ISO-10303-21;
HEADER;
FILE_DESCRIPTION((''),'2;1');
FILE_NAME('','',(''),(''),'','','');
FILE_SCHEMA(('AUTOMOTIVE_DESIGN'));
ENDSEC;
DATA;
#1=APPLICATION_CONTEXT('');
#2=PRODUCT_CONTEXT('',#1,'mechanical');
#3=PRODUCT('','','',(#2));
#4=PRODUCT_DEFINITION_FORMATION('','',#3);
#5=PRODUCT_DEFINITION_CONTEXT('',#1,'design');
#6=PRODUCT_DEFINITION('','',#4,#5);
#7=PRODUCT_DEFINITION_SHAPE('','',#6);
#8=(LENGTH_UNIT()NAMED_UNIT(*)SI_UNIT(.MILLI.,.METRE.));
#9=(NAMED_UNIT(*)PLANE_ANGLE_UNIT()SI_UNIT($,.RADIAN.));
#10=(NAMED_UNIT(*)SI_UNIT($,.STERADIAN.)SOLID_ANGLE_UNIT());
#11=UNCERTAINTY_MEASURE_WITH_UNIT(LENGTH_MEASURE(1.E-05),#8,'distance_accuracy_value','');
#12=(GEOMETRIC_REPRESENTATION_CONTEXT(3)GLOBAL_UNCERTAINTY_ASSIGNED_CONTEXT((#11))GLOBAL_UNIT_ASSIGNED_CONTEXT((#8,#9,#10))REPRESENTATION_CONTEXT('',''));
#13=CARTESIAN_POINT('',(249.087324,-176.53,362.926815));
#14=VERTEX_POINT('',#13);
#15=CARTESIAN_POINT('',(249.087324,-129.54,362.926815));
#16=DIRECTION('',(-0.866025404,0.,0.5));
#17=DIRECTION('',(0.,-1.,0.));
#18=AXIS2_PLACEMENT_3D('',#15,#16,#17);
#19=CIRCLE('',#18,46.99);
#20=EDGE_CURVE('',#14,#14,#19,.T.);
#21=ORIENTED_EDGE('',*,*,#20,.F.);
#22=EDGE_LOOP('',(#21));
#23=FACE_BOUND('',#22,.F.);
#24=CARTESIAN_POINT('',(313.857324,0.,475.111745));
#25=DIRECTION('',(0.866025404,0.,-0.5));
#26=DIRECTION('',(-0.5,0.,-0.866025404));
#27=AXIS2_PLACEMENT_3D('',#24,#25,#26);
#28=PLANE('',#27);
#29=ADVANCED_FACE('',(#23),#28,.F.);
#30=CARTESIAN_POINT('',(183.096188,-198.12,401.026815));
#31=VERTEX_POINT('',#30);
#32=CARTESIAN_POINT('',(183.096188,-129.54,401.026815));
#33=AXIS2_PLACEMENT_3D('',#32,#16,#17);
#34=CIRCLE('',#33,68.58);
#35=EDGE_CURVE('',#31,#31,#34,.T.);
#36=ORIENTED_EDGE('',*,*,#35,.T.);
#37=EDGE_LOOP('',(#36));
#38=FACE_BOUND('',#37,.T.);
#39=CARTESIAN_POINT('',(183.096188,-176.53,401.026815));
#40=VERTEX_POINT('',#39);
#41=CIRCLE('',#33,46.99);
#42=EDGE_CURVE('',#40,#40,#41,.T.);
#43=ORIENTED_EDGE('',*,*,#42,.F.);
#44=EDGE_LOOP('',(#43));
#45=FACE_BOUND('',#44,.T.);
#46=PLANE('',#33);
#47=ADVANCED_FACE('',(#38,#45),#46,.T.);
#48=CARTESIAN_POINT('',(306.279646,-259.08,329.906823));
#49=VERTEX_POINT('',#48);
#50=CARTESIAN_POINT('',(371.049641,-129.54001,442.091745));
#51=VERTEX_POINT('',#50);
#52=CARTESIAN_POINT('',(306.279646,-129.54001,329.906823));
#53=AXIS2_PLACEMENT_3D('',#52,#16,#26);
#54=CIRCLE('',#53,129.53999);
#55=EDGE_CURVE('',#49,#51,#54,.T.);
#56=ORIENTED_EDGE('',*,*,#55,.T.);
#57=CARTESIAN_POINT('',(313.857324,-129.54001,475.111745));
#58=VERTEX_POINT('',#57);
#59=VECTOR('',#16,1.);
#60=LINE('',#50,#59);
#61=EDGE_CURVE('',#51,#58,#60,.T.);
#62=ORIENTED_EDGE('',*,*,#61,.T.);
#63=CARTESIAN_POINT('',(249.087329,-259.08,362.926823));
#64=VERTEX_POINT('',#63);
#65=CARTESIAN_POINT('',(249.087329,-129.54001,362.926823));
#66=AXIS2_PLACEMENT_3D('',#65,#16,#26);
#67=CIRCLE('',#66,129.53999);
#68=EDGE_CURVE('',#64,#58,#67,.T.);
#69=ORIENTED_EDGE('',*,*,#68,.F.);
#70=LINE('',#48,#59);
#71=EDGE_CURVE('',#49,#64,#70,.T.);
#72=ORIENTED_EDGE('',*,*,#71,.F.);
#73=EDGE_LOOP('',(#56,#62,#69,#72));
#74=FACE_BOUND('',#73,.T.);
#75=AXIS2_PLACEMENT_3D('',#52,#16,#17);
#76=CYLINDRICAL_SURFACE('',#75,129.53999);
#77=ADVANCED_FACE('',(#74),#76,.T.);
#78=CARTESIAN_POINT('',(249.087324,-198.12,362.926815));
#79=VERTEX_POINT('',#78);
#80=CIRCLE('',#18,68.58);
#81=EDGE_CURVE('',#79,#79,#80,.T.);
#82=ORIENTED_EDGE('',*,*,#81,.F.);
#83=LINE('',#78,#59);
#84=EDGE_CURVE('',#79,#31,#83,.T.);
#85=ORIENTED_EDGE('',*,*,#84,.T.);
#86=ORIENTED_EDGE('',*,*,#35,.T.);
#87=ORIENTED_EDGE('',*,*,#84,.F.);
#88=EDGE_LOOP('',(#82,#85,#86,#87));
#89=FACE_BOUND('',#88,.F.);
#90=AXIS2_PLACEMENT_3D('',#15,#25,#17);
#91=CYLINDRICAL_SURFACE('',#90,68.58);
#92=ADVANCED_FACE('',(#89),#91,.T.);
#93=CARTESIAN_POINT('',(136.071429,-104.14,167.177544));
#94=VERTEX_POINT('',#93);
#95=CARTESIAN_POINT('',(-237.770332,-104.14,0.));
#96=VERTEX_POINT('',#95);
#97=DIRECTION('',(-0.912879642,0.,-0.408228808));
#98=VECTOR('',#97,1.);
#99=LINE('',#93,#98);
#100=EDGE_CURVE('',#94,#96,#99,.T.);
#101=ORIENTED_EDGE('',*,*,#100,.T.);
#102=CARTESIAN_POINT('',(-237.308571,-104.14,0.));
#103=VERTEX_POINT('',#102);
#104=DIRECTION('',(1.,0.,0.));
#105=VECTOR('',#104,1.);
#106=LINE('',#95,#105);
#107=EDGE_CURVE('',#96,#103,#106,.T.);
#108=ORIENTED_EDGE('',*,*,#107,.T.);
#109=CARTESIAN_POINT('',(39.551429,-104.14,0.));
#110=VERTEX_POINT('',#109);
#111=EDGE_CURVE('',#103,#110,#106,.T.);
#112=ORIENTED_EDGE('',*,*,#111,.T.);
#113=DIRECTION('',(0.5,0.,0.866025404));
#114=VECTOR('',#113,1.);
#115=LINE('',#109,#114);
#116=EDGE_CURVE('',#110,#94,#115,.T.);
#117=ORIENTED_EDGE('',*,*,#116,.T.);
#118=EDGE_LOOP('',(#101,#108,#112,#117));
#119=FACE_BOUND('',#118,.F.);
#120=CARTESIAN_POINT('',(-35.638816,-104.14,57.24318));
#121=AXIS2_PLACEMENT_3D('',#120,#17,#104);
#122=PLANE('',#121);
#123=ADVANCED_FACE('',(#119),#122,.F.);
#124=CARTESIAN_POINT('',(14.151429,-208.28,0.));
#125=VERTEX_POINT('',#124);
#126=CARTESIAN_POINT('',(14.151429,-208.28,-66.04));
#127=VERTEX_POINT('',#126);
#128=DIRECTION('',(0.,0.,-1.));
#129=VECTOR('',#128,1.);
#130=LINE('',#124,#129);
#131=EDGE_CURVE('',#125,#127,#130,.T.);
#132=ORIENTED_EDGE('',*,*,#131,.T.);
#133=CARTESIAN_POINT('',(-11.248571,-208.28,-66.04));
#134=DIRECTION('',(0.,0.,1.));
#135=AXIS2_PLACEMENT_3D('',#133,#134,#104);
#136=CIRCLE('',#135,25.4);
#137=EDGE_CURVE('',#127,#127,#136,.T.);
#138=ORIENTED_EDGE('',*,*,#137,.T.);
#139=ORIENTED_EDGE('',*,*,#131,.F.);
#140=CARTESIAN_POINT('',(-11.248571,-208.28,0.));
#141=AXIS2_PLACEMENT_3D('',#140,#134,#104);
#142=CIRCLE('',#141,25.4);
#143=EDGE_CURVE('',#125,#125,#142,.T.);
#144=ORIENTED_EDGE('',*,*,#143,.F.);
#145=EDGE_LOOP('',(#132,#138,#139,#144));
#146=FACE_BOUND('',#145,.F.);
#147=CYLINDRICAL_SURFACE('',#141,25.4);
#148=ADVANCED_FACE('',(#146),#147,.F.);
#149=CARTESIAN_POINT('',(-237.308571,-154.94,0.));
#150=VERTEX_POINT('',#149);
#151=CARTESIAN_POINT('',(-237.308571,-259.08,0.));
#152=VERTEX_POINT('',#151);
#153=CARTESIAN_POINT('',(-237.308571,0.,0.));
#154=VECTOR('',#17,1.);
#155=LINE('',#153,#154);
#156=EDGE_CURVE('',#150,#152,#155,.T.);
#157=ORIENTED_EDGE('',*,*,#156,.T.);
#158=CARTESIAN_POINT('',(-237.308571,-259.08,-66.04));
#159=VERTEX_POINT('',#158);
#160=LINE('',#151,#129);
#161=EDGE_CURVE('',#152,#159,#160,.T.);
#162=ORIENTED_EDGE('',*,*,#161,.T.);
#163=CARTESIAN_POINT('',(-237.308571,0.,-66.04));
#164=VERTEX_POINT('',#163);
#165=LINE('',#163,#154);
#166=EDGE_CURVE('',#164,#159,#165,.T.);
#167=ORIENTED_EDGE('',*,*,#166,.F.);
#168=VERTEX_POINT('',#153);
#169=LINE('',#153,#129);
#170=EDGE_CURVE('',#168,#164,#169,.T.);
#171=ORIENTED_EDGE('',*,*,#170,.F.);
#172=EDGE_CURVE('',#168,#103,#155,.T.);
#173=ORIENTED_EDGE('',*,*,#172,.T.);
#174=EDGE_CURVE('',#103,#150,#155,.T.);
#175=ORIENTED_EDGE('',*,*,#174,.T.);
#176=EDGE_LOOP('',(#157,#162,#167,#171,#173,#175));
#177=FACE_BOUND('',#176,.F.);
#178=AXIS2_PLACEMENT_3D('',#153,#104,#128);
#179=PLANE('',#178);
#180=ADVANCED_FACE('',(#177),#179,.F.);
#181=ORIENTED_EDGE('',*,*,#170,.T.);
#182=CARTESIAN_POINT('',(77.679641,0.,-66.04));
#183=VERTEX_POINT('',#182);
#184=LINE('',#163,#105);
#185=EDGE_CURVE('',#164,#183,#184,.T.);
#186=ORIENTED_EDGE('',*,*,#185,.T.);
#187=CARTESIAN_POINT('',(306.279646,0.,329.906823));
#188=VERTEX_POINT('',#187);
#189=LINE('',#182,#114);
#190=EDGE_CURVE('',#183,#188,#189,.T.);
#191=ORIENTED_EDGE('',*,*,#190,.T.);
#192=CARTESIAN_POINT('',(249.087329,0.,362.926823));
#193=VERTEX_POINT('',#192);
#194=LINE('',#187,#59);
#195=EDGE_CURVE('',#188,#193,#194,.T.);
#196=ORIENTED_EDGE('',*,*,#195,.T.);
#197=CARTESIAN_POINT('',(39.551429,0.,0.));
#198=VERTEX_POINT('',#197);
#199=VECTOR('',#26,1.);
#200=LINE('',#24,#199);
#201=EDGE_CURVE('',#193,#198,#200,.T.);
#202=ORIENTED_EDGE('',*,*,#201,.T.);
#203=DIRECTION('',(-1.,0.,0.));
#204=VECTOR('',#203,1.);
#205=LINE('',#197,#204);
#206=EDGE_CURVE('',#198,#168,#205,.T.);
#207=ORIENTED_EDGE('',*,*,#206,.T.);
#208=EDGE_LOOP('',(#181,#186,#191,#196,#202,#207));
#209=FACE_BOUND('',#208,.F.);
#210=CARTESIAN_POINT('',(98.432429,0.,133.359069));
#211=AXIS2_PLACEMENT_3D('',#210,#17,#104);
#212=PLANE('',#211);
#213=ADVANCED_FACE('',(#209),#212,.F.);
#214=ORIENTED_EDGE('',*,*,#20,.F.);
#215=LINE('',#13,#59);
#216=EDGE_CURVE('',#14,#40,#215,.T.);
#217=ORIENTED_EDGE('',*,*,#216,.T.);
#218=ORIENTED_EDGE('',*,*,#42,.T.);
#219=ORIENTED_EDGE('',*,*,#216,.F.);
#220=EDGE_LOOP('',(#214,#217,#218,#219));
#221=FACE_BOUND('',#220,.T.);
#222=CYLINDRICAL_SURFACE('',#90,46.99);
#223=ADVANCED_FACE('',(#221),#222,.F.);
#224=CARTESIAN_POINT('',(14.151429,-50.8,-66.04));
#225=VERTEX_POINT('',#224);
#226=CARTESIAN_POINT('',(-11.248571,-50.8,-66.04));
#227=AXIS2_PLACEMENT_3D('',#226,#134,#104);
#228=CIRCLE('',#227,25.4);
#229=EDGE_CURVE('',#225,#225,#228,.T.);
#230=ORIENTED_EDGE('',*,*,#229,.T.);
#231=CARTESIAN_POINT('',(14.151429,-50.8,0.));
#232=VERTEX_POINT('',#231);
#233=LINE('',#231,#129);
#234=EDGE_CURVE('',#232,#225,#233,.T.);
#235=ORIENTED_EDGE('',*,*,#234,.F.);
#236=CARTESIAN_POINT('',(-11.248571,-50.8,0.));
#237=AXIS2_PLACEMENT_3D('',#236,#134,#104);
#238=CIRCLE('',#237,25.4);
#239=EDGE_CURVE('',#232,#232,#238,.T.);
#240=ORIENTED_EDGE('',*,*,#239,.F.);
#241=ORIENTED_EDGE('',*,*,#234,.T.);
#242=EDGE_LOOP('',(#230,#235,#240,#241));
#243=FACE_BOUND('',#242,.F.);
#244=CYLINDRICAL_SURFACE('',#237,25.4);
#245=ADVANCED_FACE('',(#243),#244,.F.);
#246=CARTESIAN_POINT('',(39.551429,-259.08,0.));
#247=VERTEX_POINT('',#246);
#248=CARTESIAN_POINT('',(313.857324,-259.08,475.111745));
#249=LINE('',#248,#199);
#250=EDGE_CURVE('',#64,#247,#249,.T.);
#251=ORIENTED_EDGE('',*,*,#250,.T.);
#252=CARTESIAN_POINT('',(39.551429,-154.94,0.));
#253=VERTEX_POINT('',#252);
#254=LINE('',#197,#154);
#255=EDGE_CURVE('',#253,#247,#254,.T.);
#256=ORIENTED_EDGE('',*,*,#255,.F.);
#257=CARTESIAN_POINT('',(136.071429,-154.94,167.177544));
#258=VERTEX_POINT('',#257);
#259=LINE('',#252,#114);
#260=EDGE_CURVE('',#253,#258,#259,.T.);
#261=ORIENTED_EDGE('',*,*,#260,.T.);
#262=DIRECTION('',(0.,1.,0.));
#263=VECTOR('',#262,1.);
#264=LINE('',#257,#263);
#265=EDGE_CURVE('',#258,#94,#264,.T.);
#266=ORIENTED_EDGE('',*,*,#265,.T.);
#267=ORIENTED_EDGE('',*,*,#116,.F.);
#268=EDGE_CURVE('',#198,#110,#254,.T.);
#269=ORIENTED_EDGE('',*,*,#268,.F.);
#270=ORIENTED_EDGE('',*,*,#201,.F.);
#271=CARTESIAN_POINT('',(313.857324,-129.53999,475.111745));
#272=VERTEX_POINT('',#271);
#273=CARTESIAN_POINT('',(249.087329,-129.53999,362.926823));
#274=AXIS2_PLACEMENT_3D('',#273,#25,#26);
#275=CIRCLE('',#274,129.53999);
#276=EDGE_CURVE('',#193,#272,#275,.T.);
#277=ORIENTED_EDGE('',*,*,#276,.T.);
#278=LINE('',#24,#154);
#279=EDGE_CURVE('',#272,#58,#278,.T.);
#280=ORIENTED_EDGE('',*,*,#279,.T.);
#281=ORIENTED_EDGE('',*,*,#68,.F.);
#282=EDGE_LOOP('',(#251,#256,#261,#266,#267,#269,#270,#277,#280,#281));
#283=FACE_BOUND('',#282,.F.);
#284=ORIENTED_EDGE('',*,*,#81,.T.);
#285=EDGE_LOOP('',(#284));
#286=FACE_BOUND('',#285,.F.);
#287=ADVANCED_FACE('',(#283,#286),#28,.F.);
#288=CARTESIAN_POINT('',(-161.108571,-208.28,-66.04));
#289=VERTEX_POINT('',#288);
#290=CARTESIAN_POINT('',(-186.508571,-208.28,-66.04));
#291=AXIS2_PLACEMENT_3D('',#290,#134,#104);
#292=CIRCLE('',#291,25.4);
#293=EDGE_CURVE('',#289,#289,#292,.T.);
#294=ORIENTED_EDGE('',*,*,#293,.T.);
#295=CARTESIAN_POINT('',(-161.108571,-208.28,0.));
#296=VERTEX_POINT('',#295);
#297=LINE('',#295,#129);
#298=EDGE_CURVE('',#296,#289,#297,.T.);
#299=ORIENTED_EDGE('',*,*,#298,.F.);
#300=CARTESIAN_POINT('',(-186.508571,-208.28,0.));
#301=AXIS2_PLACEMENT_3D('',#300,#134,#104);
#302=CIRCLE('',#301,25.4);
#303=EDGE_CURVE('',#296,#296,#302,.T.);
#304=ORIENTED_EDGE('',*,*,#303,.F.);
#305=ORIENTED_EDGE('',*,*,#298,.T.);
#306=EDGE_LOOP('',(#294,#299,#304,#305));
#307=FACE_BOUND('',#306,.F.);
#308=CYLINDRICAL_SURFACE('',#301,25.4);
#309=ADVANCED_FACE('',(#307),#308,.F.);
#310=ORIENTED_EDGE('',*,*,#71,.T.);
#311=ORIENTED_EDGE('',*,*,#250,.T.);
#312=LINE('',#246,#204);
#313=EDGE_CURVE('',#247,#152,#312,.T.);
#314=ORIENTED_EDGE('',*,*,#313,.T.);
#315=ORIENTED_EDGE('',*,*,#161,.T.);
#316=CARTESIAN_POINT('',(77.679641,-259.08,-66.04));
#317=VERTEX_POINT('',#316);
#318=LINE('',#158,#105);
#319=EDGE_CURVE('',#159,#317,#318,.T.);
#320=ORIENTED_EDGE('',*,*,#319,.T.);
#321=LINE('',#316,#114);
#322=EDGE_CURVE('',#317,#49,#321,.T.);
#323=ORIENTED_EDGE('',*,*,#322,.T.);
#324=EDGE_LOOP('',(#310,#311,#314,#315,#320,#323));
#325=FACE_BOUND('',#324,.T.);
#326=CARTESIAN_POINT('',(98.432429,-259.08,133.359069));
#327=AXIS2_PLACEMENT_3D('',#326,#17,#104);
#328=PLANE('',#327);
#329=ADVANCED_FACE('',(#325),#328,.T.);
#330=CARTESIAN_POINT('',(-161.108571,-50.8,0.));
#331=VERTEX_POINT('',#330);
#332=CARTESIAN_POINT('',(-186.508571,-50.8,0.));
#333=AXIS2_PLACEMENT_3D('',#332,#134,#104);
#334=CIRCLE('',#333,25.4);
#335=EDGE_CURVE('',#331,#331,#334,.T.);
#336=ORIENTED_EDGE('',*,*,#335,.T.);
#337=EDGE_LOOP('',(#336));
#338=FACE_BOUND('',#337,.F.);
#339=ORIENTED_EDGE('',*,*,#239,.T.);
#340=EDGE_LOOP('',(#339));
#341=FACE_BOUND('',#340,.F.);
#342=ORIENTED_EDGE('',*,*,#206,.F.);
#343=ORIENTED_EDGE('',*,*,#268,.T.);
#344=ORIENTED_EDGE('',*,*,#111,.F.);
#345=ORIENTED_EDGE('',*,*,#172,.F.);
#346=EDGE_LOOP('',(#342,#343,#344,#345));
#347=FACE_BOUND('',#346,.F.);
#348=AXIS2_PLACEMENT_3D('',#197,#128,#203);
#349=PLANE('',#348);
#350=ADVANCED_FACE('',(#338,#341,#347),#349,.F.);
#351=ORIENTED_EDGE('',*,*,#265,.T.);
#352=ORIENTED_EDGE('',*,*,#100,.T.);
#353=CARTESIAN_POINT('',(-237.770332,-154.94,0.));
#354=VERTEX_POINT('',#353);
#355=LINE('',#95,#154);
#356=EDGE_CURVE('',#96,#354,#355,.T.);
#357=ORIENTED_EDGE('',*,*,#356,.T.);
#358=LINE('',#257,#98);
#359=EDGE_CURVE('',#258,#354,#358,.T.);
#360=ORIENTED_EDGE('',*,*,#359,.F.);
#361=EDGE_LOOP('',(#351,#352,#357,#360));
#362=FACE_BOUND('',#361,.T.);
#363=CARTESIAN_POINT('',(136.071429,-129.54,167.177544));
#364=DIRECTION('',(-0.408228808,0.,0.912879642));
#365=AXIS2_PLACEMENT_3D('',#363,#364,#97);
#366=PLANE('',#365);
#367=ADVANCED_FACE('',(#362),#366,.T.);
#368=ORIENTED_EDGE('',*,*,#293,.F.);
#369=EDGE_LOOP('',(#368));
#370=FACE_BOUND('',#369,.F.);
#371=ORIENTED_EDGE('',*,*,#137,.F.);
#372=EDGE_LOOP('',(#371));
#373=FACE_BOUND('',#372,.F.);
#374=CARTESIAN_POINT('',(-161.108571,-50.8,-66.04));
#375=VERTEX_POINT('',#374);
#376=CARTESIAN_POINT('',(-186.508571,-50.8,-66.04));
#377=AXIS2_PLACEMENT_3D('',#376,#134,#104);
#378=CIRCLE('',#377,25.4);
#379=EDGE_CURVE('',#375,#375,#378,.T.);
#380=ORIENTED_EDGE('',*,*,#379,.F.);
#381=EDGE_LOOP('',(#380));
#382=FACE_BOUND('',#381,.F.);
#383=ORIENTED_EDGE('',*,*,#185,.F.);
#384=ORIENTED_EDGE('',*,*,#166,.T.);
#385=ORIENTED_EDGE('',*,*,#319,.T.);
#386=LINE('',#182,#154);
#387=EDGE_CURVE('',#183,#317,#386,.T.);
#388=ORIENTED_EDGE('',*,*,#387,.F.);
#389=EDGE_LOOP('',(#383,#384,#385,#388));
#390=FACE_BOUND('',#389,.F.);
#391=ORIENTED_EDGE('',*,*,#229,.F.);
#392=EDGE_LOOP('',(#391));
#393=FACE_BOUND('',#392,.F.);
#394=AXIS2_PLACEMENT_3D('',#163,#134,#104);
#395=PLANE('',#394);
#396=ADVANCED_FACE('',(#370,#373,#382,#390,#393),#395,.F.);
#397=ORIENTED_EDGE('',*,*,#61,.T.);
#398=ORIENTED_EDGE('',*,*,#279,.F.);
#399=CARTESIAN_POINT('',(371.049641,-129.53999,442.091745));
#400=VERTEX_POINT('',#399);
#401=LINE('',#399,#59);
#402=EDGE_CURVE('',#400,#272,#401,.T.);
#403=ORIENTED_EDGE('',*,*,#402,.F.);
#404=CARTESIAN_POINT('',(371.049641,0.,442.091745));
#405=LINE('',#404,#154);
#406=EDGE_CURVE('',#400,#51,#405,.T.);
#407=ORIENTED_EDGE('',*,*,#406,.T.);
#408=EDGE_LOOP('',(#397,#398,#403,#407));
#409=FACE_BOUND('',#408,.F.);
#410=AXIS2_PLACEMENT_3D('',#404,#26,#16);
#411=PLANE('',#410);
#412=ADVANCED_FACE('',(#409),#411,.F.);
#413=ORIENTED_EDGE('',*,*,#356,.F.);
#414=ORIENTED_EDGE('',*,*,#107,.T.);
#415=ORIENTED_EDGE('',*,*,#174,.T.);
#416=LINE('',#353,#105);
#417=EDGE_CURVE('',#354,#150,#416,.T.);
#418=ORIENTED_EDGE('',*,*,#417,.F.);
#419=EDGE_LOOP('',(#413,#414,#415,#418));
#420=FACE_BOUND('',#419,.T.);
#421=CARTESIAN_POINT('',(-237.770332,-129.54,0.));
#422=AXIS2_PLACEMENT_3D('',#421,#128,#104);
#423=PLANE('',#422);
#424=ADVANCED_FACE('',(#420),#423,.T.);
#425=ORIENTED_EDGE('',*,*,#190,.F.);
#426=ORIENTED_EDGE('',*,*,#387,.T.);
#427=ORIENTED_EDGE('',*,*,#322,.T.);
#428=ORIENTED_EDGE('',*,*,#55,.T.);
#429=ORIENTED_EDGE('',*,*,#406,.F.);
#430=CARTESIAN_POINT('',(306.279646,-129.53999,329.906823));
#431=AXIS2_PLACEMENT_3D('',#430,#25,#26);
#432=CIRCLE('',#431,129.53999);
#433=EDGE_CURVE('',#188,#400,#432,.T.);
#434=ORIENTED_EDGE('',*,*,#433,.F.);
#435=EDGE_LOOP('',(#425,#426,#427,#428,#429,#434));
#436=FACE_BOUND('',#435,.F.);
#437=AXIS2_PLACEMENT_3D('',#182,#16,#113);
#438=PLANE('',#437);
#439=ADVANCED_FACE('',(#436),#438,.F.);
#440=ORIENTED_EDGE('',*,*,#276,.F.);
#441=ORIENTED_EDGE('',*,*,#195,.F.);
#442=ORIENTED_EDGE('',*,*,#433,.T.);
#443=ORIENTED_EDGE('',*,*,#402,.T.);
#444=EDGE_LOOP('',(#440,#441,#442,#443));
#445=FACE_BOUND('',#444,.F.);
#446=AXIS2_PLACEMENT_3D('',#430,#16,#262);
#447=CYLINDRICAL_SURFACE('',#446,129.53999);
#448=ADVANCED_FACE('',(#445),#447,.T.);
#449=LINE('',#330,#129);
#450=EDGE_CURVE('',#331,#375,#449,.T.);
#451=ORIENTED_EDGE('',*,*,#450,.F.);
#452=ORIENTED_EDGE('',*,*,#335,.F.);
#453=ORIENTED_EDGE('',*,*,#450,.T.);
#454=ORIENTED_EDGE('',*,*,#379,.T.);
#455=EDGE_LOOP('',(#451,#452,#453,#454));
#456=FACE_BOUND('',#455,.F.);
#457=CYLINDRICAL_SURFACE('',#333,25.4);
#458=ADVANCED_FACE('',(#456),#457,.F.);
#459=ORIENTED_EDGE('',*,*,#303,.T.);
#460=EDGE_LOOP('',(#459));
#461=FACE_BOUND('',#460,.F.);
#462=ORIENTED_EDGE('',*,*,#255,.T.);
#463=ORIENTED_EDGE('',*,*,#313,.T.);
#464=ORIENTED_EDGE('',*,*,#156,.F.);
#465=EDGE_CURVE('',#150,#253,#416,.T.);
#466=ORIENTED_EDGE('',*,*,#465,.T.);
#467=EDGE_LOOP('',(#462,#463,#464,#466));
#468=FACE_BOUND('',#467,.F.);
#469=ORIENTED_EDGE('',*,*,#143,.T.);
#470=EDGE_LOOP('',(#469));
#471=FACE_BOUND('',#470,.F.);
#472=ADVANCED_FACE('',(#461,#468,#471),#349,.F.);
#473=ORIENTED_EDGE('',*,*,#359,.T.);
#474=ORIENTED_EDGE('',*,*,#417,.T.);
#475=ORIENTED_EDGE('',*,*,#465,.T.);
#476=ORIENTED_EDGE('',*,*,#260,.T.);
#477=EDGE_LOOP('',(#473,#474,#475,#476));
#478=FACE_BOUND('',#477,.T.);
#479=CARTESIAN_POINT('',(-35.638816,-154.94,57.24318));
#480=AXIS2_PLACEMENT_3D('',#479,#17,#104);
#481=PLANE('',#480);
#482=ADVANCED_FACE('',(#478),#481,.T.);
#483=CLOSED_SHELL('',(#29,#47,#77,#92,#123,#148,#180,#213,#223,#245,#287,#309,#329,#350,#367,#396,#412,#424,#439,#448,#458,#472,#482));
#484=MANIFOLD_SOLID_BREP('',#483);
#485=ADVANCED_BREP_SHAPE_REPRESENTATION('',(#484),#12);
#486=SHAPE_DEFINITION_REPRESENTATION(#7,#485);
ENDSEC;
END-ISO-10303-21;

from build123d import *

# Parameters (mm, degrees)
F1_DEPTH = 259.08
F2_R     = 68.58
F2_R_2   = 46.99
F3_DEPTH = 76.2
F4_R     = 129.53999
F7_DEPTH = 25.4
F8_R     = 25.4
F9_DEPTH = 76.2


# Not quite as in the source:
# - a fillet or chamfer is up to 0.001 mm smaller than in the source, because OpenCascade refuses the exact size


with BuildPart() as f1:
    # F0 (on Front) → F1 (new body)
    with BuildSketch(Plane.XZ):
        Polygon((39.5514294499, 0), (-237.3085705501, 0), (-237.3085705501, -66.04), (77.6796412272, -66.04), (371.0496412272, 442.0917454165), (313.8573235613, 475.1117454165), align=None)
    extrude(amount=F1_DEPTH)

    # F2 (on face) → F3 (join)
    with BuildSketch(Plane(origin=(29.6635720874, 0, -17.1262713298), x_dir=(0, -1, 0), z_dir=(-0.8660254038, 0, 0.5))):
        with Locations((129.54, 438.8475029477)):
            Circle(F2_R)
        with Locations((129.54, 438.8475029477)):
            Circle(F2_R_2, mode=Mode.SUBTRACT)
    extrude(amount=F3_DEPTH)

    # F4 (radius 129.54 in the source; OpenCascade refuses exactly that, so slightly less here)
    f4_edges = [f1.edges().sort_by_distance(p)[0] for p in [
        (342.453482, -259.08, 458.601745),
        (342.453482, 0, 458.601745),
    ]]
    fillet(f4_edges, radius=F4_R)

    # F6 (on offset) → F7 (join, symmetric)
    with BuildSketch(Plane.XZ.offset(129.54)):
        Polygon((136.0714294499, 167.1775439465), (-237.7703315524, 0), (39.5514294499, 0), align=None)
    extrude(amount=F7_DEPTH, both=True)

    # F8 (on face) → F9 (cut)
    with BuildSketch(Plane.XY):
        with Locations((-186.5085705501, -50.8)):
            Circle(F8_R)
        with Locations((-186.5085705501, -208.28)):
            Circle(F8_R)
        with Locations((-11.2485705501, -50.8)):
            Circle(F8_R)
        with Locations((-11.2485705501, -208.28)):
            Circle(F8_R)
    extrude(amount=-F9_DEPTH, mode=Mode.SUBTRACT)


solid = f1.part
